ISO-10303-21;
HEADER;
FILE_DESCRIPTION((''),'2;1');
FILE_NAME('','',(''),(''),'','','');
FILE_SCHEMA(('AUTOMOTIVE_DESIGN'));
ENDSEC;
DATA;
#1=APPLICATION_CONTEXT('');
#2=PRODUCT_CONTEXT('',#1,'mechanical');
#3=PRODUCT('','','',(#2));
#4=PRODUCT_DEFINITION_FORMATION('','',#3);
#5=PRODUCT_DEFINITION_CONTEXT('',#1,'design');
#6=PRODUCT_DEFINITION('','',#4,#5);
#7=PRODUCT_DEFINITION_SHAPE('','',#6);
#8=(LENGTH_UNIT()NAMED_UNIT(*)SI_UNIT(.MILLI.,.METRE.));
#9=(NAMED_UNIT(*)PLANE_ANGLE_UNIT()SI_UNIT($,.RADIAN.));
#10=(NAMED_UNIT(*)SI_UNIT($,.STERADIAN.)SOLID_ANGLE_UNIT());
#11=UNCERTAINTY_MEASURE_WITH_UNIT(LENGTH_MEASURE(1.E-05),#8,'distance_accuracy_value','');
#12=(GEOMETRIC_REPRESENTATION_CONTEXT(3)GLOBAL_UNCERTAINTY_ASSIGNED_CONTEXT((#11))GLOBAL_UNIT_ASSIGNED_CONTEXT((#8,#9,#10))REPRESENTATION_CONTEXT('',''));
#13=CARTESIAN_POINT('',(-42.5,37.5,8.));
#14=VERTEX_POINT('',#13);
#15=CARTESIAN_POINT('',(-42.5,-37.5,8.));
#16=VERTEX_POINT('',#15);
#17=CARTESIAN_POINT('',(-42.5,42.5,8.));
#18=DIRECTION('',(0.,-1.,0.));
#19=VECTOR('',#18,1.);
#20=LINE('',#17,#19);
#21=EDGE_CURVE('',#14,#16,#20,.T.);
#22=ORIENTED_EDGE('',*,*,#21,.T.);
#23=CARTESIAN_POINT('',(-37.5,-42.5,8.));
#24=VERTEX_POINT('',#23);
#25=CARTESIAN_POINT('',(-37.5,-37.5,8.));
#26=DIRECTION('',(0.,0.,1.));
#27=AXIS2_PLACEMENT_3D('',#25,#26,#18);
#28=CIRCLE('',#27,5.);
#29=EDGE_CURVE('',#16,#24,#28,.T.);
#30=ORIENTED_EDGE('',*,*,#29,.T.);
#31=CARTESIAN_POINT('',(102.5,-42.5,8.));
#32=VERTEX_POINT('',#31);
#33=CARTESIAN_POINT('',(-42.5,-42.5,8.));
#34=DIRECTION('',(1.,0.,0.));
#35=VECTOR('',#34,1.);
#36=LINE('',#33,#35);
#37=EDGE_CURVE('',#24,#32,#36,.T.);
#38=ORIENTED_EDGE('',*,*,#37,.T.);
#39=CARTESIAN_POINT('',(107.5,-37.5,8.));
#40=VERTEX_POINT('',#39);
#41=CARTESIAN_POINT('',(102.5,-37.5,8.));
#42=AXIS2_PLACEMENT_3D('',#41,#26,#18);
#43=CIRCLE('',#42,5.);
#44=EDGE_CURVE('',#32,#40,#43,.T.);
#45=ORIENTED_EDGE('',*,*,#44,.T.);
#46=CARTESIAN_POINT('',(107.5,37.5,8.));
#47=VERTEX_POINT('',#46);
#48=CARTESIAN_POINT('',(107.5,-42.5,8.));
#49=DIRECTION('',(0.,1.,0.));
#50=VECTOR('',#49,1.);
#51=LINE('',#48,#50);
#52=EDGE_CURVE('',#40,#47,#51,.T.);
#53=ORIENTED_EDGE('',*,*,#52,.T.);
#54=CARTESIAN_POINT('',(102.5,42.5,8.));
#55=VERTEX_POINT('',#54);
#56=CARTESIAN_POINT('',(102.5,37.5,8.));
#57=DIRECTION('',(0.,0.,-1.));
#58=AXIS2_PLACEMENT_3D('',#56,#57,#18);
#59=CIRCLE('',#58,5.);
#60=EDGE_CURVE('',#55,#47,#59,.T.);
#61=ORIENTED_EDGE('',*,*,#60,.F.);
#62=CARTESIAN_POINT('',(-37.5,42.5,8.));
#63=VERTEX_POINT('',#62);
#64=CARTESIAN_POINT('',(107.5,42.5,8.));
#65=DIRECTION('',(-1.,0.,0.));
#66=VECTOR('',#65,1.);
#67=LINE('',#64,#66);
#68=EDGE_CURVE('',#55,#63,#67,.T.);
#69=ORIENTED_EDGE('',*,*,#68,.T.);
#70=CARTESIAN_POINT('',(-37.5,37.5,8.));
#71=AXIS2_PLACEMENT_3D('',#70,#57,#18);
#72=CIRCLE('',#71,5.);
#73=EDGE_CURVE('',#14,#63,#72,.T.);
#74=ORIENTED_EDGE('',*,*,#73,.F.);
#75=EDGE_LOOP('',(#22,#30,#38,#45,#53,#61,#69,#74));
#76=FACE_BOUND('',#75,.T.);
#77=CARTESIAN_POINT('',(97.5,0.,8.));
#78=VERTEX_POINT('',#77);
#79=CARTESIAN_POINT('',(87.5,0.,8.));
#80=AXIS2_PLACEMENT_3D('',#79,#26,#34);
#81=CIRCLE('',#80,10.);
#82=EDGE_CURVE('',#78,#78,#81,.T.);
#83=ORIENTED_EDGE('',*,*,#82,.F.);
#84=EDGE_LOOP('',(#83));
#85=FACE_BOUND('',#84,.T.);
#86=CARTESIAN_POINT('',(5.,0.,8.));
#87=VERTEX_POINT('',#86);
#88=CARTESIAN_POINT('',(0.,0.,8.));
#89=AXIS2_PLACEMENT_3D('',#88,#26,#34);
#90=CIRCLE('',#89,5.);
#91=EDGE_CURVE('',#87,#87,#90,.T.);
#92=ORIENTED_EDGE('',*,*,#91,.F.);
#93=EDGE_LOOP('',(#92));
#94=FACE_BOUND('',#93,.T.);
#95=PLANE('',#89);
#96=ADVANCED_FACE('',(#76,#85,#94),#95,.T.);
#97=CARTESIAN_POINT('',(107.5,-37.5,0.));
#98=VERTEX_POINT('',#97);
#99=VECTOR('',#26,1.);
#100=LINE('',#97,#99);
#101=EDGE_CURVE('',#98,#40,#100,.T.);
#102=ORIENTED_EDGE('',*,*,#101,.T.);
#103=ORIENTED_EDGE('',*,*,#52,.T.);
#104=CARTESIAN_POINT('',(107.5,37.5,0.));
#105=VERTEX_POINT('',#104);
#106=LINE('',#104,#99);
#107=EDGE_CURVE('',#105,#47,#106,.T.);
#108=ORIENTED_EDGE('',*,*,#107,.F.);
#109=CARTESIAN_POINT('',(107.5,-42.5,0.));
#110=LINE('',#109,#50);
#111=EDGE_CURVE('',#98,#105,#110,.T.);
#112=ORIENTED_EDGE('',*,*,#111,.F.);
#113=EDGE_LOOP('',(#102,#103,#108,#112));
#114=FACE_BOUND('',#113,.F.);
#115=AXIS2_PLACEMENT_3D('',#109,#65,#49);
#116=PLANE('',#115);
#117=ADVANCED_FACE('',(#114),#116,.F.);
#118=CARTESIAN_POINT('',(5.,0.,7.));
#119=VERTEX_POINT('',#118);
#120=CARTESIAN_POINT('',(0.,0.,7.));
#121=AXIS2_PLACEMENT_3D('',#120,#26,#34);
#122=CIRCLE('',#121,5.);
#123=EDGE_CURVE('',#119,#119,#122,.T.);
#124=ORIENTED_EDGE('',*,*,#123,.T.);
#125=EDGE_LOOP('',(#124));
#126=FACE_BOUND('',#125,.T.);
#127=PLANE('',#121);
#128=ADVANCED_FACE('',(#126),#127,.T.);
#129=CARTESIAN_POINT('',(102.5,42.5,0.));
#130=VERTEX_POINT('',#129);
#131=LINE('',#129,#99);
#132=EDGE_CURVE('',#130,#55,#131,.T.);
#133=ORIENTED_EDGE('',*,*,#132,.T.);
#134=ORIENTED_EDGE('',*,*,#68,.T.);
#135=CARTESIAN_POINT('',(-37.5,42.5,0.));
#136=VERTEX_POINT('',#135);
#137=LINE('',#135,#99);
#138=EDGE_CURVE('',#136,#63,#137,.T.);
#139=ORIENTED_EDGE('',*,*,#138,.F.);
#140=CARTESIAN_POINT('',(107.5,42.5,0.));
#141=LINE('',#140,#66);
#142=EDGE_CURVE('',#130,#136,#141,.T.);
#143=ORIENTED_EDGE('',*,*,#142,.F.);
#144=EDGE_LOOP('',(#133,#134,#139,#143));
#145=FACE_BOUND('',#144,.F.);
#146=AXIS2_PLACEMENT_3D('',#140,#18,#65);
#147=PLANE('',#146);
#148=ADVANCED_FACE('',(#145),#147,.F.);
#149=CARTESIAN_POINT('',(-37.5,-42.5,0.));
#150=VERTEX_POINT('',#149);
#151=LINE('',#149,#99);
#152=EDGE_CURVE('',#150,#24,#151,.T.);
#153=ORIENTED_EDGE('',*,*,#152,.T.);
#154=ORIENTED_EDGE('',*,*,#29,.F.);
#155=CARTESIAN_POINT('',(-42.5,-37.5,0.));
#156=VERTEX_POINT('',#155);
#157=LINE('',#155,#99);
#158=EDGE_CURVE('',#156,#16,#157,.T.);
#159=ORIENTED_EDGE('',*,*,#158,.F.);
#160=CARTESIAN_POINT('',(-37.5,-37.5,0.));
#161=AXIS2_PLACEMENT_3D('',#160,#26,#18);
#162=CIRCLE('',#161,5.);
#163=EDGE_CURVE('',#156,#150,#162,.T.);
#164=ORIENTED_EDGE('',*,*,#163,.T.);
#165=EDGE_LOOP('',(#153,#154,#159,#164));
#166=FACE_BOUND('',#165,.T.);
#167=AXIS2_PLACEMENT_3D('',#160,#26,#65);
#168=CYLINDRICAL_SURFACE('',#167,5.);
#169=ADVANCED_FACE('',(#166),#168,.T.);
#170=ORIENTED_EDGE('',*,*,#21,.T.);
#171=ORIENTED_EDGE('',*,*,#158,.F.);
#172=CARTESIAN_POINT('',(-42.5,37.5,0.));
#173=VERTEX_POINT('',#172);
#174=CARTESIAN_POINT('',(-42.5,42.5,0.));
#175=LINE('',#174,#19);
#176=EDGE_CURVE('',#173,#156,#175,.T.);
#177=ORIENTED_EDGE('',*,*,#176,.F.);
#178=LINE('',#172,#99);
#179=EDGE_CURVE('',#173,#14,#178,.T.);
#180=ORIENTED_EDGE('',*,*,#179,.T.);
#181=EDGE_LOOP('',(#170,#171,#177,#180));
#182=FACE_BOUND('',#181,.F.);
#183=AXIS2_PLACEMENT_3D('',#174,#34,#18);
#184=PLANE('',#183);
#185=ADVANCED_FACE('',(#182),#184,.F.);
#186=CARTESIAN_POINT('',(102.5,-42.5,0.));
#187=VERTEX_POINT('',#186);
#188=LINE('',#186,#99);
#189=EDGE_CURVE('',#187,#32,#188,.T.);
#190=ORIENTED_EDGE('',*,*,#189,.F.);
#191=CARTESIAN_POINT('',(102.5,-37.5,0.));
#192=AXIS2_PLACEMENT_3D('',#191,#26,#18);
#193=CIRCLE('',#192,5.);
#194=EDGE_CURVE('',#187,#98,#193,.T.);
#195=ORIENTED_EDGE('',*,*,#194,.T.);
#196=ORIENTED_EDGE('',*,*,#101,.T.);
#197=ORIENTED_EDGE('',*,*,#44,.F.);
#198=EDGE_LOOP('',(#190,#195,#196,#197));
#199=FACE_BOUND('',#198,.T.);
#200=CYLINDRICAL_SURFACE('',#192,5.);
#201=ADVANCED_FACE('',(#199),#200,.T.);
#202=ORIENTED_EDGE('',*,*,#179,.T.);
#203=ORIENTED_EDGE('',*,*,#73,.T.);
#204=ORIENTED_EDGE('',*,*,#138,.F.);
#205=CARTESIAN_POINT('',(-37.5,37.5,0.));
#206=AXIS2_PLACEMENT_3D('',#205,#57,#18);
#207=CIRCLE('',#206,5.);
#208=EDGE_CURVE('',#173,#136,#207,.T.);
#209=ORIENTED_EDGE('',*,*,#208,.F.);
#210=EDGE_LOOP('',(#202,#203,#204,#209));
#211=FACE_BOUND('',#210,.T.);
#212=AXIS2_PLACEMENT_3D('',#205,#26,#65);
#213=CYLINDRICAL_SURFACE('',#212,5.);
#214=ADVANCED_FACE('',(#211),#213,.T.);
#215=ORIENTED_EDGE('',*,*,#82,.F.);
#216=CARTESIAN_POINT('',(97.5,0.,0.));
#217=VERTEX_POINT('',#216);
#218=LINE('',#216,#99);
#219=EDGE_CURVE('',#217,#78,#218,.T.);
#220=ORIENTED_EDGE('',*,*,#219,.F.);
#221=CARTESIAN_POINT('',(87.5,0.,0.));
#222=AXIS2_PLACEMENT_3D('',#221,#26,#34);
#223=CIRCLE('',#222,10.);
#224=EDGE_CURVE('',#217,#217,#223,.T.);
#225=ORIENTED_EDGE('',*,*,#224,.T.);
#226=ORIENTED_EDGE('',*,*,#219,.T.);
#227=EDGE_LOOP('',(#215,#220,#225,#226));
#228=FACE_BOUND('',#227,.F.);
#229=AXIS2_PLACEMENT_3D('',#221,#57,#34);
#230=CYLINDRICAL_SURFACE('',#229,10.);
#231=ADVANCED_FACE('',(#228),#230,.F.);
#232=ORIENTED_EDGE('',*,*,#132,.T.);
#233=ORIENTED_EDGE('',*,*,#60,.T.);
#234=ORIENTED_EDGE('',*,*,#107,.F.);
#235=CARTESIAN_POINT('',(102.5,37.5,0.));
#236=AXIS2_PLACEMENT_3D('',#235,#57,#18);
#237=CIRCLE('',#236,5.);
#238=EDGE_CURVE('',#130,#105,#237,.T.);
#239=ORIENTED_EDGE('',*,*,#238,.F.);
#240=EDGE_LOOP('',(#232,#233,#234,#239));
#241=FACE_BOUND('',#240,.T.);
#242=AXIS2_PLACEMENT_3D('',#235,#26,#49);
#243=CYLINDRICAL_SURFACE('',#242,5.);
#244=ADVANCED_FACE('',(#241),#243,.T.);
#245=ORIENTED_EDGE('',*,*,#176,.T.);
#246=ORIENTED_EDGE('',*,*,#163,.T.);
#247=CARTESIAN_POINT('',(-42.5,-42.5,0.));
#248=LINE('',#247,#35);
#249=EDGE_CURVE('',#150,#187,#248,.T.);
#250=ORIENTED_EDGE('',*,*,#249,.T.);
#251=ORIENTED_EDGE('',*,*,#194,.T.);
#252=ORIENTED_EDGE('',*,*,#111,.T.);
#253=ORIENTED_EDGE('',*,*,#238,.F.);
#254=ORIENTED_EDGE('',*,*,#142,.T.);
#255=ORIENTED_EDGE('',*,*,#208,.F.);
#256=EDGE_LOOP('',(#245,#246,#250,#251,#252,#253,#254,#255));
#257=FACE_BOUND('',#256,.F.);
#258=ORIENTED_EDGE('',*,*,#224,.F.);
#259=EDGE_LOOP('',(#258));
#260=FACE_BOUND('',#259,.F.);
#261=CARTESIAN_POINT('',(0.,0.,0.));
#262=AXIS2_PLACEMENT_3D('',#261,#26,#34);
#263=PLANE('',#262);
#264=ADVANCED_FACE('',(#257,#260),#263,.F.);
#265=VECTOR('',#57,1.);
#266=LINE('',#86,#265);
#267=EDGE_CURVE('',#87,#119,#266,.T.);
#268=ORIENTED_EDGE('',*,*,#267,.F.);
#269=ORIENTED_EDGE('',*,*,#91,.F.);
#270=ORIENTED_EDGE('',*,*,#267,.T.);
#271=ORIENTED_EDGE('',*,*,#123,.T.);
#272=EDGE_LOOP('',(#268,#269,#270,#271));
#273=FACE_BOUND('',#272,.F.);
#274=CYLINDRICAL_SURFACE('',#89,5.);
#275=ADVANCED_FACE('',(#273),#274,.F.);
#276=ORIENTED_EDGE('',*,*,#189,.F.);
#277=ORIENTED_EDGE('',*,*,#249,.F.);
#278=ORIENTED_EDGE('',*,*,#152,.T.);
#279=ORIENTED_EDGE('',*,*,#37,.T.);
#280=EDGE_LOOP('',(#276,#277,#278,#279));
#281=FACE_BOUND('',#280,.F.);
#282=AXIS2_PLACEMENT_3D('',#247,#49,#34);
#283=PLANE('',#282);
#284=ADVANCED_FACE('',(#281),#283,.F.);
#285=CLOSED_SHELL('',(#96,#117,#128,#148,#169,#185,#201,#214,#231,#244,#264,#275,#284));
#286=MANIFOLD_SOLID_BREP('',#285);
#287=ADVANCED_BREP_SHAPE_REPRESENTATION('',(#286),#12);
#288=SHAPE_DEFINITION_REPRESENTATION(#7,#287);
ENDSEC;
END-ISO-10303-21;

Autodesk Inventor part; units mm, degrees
ref_plane "YZ Plane" through (0, 0, 0) normal (1, 0, 0) x (0, 1, 0)
ref_plane "XZ Plane" through (0, 0, 0) normal (0, 1, 0) x (-1, 0, 0)
ref_plane "XY Plane" through (0, 0, 0) normal (0, 0, 1) x (1, 0, 0)
sketch "Sketch1" plane through (0, 0, 0) normal (0, 0, 1) x (1, 0, 0)
  line L0 (-42.5, -42.5) -> (107.5, -42.5)
  line L1 (107.5, -42.5) -> (107.5, 42.5)
  line L2 (107.5, 42.5) -> (-42.5, 42.5)
  line L3 (-42.5, 42.5) -> (-42.5, -42.5)
  line L4 (-42.5, -42.5) -> (107.5, 42.5) construction
  line L5 (107.5, -42.5) -> (-42.5, 42.5) construction
  circle A0 centre (87.5, -22.5) radius 10
  circle A1 centre (87.5, 22.5) radius 10
  line L6 (32.5, 0) -> (107.5, 0) construction
  circle A2 centre (87.5, 0) radius 10
  line L7 (40, 40) -> (-40, 40)
  line L8 (-40, 40) -> (-40, -40)
  line L9 (-40, -40) -> (40, -40)
  line L10 (40, -40) -> (40, 40)
  line L11 (40, 40) -> (-40, -40) construction
  line L12 (-40, 40) -> (40, -40) construction
  point P0 (0, 0)
  dimension "d0" = 150
  dimension "d1" = 85
  dimension "d23" = 20
  dimension "d25" = 20
  dimension "d26" = 20
  dimension "d30" = 80
extrude "Plate1" add sketch "Sketch1" along normal blind 8 contours L3 L2 L1 L0 | A0 | A1 | L10 L9 L8 L7
fillet "Corner Round1" radius 5 4 edges at (107.5, -42.5, 4) (-42.5, -42.5, 4) (-42.5, 42.5, 4) (107.5, 42.5, 4)
sketch "Sketch5" plane through (0, 0, 8) normal (0, 0, 1) x (1, 0, 0)
  line L0 (102.5, -42.5) -> (-37.5, -42.5) projected
  line L1 (-42.5, -37.5) -> (-42.5, 37.5) projected
  line L2 (-37.5, 42.5) -> (102.5, 42.5) projected
  circle A0 centre (0, 0) radius 42.5
  circle A1 centre (0, 0) radius 5
  point P0 (0, 0)
  dimension "d27" = 10
extrude "Extrusion2" cut sketch "Sketch5" against normal blind 1 contours A1
equation "\"d26\" = d25"
equation "\"d2\" = Thickness"
equation "\"BendReliefWidth\" = Thickness"
equation "\"BendReliefDepth\" = 0.5 * Thickness"
equation "\"CornerReliefSize\" = 4 * Thickness"
equation "\"MinimumRemnant\" = 2 * Thickness"
equation "\"TransitionRadius\" = BendRadius"
equation "\"JacobiRadiusSize\" = BendRadius"
equation "\"GapSize\" = Thickness"
equation "\"Thickness\" = 8"
equation "\"BendRadius\" = 5"
properties part number "TZS 0983 leg floor plate" material "Steel"
